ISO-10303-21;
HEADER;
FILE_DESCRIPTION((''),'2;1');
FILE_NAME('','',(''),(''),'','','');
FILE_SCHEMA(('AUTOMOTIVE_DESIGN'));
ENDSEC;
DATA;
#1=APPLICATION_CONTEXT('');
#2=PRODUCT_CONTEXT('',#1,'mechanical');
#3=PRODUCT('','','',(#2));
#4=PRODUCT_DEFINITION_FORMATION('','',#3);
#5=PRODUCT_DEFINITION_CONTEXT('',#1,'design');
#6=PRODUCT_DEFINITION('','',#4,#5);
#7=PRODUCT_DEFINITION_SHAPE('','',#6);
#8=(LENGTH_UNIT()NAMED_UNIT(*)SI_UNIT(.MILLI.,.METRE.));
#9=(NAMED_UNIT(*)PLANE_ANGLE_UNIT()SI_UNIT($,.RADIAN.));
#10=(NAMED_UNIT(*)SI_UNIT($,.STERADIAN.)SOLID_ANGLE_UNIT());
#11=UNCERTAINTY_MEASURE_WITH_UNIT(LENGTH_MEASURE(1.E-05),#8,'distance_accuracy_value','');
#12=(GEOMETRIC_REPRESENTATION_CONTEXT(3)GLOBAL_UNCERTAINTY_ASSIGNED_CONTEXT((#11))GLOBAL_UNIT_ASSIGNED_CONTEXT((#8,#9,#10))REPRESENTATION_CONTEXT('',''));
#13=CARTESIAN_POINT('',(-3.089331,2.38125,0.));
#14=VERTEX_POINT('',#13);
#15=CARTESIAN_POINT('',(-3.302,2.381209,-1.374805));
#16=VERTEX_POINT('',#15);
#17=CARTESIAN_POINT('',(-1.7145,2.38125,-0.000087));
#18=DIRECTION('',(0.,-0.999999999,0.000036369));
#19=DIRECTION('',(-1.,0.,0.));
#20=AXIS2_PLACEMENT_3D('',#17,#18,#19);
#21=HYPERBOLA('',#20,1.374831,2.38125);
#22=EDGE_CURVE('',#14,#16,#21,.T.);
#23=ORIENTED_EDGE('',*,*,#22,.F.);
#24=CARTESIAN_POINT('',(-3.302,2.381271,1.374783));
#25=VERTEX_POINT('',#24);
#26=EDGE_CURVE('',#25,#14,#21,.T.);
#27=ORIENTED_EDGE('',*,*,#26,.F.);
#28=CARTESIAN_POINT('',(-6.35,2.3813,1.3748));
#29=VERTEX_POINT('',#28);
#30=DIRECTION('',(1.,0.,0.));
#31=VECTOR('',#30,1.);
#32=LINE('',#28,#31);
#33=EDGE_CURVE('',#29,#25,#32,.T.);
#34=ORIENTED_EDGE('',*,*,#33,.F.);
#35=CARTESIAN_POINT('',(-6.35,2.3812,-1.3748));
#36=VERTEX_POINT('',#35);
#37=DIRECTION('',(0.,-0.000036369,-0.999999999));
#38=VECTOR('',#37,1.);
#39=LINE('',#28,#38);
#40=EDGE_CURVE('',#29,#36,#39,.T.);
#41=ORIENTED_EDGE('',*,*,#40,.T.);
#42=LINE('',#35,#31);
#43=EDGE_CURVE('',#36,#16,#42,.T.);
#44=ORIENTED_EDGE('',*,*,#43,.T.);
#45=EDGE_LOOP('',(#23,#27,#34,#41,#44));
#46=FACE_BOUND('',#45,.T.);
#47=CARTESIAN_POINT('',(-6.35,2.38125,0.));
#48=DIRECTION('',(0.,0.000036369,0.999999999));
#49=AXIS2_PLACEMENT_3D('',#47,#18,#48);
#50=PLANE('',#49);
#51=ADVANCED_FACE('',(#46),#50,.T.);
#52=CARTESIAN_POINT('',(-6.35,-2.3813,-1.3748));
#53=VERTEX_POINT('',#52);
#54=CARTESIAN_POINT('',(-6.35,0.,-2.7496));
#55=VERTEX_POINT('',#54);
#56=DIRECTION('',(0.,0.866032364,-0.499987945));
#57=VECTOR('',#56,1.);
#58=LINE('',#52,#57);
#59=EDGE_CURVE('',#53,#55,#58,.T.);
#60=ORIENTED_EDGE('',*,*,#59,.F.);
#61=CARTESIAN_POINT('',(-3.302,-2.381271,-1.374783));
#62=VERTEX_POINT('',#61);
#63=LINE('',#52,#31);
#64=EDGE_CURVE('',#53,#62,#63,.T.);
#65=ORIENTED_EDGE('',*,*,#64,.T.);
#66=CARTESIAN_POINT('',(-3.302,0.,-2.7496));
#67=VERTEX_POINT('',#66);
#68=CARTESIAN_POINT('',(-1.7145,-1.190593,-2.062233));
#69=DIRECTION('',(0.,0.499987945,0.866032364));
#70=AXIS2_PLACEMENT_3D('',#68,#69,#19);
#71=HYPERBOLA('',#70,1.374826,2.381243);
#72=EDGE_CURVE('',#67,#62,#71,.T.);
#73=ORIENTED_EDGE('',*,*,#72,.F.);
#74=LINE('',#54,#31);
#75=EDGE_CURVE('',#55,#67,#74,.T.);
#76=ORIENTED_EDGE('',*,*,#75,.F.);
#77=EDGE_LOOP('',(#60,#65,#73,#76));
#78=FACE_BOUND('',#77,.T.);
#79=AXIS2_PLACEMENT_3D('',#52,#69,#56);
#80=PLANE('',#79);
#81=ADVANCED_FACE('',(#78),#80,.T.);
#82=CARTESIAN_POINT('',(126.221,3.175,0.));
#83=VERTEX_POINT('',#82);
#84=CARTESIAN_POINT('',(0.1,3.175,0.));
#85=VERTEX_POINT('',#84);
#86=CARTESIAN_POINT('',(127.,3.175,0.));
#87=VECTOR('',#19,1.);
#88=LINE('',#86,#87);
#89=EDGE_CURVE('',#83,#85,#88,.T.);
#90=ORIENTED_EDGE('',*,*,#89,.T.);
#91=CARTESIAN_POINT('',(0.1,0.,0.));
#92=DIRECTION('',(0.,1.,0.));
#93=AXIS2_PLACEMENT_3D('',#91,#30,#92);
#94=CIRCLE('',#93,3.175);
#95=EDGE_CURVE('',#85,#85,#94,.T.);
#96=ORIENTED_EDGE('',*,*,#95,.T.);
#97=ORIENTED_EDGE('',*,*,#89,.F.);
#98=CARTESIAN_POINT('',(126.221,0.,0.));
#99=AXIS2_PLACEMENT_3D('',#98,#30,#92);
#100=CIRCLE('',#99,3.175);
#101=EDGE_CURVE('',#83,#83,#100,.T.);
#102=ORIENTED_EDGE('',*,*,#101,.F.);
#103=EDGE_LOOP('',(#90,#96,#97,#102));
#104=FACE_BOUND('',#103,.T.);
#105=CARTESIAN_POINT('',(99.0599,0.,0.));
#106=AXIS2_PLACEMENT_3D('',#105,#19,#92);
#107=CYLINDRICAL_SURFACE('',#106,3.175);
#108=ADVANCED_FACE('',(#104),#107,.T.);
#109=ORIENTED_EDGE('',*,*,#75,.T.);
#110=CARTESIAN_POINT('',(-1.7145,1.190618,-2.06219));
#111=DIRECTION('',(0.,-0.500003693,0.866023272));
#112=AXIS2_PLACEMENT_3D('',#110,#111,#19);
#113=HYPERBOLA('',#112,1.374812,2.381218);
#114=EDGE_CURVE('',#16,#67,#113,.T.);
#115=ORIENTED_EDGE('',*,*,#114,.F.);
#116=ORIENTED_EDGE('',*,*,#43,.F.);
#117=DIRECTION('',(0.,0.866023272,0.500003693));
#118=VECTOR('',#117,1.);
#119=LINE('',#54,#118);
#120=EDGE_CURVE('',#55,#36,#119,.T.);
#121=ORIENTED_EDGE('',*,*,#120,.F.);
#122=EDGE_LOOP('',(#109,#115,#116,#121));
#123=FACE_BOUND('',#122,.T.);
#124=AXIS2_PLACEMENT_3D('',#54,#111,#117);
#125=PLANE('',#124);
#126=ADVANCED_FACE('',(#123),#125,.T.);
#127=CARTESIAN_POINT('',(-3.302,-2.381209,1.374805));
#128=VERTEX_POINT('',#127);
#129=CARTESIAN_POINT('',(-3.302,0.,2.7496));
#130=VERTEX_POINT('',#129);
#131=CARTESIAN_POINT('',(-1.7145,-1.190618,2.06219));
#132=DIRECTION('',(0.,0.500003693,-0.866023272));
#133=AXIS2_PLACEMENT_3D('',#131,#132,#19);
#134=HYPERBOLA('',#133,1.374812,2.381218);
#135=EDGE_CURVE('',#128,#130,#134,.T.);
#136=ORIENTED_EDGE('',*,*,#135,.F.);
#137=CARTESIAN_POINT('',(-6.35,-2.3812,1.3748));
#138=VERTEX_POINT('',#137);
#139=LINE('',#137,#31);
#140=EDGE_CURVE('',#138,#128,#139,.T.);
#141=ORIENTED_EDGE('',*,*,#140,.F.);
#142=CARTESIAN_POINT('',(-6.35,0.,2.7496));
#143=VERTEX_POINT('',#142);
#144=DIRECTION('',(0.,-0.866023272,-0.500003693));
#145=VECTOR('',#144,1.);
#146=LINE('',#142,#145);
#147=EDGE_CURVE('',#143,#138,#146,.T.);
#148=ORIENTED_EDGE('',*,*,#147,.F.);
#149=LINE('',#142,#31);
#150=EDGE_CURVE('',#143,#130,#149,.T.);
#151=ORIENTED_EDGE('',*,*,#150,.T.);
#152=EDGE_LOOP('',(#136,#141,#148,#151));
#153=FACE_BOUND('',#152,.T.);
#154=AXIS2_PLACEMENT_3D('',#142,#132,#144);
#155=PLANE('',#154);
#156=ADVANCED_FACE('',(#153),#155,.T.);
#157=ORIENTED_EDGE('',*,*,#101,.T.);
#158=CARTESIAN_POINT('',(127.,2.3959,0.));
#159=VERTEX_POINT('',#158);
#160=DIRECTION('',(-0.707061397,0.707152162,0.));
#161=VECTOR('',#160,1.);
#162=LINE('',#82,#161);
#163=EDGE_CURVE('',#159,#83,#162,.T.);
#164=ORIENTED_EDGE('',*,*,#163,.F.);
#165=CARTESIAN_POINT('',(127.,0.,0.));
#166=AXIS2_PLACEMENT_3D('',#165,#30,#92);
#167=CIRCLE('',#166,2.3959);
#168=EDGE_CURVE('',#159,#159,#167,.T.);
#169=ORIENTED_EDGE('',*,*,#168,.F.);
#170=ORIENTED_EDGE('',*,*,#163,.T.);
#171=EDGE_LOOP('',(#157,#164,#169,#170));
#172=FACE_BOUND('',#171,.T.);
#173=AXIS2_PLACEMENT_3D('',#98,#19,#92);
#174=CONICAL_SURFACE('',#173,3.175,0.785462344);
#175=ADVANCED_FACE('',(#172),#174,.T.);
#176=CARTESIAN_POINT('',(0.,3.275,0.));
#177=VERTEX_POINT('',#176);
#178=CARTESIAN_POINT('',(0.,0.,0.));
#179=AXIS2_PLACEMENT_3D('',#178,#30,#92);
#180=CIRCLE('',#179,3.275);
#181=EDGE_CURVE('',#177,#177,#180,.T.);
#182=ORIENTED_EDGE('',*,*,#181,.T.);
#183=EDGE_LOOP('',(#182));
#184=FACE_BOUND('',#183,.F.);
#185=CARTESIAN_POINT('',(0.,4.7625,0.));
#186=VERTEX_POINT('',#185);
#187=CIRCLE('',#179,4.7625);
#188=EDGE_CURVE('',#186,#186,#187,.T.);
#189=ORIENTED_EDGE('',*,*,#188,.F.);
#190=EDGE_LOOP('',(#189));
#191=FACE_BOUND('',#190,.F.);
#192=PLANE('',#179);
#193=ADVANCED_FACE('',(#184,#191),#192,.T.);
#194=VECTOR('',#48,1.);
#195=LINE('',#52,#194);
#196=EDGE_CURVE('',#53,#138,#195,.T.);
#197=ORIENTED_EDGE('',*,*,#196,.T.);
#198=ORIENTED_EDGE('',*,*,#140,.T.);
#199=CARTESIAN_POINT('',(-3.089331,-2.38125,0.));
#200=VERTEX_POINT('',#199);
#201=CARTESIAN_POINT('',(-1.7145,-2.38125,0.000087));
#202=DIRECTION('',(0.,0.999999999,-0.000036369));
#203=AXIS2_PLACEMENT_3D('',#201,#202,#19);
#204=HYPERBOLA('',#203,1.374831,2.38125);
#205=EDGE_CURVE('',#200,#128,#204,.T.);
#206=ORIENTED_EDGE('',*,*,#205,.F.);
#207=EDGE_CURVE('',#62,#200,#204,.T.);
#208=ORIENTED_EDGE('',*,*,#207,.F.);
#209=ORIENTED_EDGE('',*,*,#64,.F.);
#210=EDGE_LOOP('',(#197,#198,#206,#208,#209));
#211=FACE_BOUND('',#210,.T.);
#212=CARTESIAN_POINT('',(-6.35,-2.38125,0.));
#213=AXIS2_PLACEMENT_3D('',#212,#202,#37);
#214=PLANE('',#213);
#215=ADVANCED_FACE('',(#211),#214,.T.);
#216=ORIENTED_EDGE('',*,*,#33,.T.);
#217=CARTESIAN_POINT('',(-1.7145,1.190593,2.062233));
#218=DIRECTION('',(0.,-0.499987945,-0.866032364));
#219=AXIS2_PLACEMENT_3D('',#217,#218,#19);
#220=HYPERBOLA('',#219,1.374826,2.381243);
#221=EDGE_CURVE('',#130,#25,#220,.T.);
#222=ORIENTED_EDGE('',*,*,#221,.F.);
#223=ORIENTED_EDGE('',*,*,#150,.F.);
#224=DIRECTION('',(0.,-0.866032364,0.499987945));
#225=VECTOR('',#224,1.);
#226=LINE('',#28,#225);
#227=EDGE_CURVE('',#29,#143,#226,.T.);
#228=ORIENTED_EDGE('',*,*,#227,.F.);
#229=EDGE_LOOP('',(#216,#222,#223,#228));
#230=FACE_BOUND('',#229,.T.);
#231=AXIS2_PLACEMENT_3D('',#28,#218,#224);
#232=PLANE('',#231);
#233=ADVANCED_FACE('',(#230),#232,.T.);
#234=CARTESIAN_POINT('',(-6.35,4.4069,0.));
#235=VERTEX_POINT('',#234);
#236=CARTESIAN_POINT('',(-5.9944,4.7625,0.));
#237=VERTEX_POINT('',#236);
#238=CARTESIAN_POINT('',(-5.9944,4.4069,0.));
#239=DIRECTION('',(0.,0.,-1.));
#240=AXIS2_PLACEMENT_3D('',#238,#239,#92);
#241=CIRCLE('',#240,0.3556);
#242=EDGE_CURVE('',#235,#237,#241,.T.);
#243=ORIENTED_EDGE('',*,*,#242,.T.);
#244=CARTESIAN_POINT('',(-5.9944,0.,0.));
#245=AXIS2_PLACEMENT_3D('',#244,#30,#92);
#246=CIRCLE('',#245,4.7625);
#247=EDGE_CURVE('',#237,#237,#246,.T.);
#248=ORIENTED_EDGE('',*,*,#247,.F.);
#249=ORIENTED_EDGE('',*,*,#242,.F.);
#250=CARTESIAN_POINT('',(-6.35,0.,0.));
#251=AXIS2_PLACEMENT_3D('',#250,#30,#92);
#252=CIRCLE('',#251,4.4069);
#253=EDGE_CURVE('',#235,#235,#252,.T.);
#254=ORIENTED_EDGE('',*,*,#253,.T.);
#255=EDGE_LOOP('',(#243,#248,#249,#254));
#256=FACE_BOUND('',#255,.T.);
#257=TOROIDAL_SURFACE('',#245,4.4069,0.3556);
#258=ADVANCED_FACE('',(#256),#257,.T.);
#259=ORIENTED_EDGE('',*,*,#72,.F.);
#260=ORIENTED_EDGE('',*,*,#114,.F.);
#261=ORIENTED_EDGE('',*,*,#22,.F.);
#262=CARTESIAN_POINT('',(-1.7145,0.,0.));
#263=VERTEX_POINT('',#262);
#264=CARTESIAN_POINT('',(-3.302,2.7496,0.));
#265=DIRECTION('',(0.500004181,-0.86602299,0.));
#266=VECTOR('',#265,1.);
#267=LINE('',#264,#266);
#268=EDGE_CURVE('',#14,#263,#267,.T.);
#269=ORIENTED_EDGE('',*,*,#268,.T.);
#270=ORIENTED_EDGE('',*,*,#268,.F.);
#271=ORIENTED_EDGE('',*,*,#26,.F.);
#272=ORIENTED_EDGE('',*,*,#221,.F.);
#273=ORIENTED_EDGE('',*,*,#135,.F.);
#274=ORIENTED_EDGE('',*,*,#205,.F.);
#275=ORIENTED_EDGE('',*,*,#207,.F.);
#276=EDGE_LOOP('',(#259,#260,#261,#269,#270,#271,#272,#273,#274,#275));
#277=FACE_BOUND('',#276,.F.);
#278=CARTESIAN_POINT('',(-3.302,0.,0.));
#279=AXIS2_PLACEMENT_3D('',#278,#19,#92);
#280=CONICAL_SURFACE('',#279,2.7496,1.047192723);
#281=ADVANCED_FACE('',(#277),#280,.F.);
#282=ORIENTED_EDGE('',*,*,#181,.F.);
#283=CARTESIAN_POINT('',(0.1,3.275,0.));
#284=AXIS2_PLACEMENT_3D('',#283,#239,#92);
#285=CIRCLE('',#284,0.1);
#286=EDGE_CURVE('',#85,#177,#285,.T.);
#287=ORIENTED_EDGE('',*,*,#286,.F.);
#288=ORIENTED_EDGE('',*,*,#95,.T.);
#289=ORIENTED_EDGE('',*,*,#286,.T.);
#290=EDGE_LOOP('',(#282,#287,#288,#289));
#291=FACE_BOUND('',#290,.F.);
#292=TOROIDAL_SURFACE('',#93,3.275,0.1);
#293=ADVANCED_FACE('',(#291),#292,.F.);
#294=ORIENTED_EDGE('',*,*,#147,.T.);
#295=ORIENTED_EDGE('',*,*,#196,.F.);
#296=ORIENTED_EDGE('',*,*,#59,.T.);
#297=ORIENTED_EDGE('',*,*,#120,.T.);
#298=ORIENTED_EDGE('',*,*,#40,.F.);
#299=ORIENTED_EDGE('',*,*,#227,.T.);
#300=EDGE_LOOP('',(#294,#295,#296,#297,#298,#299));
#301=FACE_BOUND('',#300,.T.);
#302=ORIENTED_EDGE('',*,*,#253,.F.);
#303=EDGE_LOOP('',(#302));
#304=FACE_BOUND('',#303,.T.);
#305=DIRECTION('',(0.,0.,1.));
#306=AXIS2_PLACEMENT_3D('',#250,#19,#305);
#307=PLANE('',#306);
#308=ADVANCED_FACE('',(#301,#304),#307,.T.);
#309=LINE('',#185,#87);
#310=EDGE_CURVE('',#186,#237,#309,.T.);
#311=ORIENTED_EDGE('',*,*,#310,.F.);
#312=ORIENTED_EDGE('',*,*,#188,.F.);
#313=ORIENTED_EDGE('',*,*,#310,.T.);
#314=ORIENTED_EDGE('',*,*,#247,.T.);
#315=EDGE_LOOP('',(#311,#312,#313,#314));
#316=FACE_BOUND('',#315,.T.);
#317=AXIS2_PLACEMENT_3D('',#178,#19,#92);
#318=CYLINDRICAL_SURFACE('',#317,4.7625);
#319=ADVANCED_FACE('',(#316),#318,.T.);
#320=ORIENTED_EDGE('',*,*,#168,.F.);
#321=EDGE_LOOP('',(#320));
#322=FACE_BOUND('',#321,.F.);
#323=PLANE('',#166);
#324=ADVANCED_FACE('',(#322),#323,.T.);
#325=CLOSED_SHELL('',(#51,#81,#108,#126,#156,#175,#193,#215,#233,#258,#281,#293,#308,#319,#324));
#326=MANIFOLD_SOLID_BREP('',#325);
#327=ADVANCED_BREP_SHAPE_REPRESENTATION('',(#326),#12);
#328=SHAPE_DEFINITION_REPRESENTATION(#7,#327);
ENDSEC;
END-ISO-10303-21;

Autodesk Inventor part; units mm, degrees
ref_plane "YZ Plane" through (0, 0, 0) normal (1, 0, 0) x (0, 1, 0)
ref_plane "XZ Plane" through (0, 0, 0) normal (0, 1, 0) x (-1, 0, 0)
sketch "Sketch1" plane through (0, 0, 0) normal (0, 0, 1) x (1, 0, 0)
  line L0 (-1.7145, 0) -> (127, 0)
  line L1 (127, 0) -> (127, 3.175)
  line L2 (127, 3.175) -> (101.6, 3.175)
  line L3 (101.6, 3.175) -> (99.0599, 3.175)
  line L4 (99.0599, 3.175) -> (0, 3.175)
  line L5 (0, 3.175) -> (0, 4.7625)
  line L6 (0, 4.7625) -> (-6.35, 4.7625)
  line L7 (-6.35, 4.7625) -> (-6.35, 2.7496)
  line L8 (-6.35, 2.7496) -> (-3.302, 2.7496)
  line L9 (-3.302, 2.7496) -> (-1.7145, 0)
  line L10 (-33.02, 0) -> (153.67, 0) projected
  line L11 (0, -0.9525) -> (0, 5.715) projected
  line L12 (101.6, 3.175) -> (0, 3.175) construction
  dimension "d1" = 25.4
  dimension "d2" = 2.5401
  dimension "d3" = 6.35
  dimension "d4" = 3.048
  dimension "d5" = 60
  dimension "d6" = 6.35
  dimension "d7" = 6.35
  dimension "d8" = 5.4993
  dimension "d9" = 9.525
  dimension "d26" = 127
revolve "Body" add sketch "Sketch1" angle 360 about axis through (-1.7145, 0, 0) along (1, 0, 0)
sketch "Sketch2" plane through (-6.35, 0, 0) normal (-1, 0, 0) x (0, 0, 1)
  circle A0 centre (0, 0) radius 2.7496 projected
  line L0 (0, -6.6675) -> (0, 6.6675) projected
  line L1 (-6.6675, 0) -> (6.6675, 0) projected
  line L2 (2.7496, 0) -> (1.3748, -2.3812)
  line L3 (1.3748, -2.3812) -> (-1.3748, -2.3813)
  line L4 (-1.3748, -2.3813) -> (-2.7496, 0)
  line L5 (-2.7496, 0) -> (-1.3748, 2.3812)
  line L6 (-1.3748, 2.3812) -> (1.3748, 2.3813)
  line L7 (1.3748, 2.3813) -> (2.7496, 0)
extrude "Slot" add sketch "Sketch2" against normal up to next contours L7 A0 | A0 L2 | L6 L0 A0 | A0 L0 L3 | L0 L6 A0 | A0 L3 L0 | L4 A0 | A0 L5
fillet "Fillet1" radius 0.3556 1 edges at (-6.35, -4.7625, 0)
thread "Thread" size "1/4-20 UNC" class "2A" standard "ANSI Unified Screw Threads" length 25.4
chamfer "Chamfer1" distance 0.7791 distance2 0.779 1 edges at (127, -3.175, 0) measured on face at (127, 0.9371, 0.4918)
ref_plane "Work Plane1" through (29, 0, 0) normal (0, -1, 0) x (1, 0, 0)
fillet "Fillet2" radius 0.1 1 edges at (0, -3.175, 0)
equation "\"d30\" = R"
equation "\"d17\" = RR"
equation "\"d13\" = GEL"
equation "\"d15\" = -0.5 * SPD + 0.5 * GD"
equation "\"d16\" = GUL"
equation "\"d1\" = GEL"
equation "\"d3\" = KOH"
equation "\"d4\" = INTI"
equation "\"d6\" = GD"
equation "\"d7\" = BDM"
equation "\"d8\" = 1.1547 * SW"
equation "\"d9\" = KOD"
equation "\"d26\" = NLG"
equation "\"GD\" = NND"
equation "\"NLG\" = 127"
equation "\"GEL\" = 25.4"
equation "\"KOD\" = 9.525"
equation "\"KOH\" = NND"
equation "\"INTI\" = 3.048"
equation "\"GAL\" = 2.54"
equation "\"GUL\" = 0.77902"
equation "\"BDM\" = NND"
equation "\"SW\" = 4.7625"
equation "\"RR\" = 0.3556"
equation "\"SPD\" = GD1"
equation "\"R\" = 0.1"
equation "\"PHH\" = 0.1 * NND"
equation "\"THREADDIA\" = 6.35"
equation "\"FAWI\" = 45deg"
equation "\"NND\" = 6.35"
equation "\"E0\" = 1.155 * SW"
equation "\"FAWI1\" = 30deg"
equation "\"TOA\" = 30deg"
equation "\"GD1\" = 4.79189"
properties part number "Unbrako - 1/4 x 5" material "Steel, Mild"
